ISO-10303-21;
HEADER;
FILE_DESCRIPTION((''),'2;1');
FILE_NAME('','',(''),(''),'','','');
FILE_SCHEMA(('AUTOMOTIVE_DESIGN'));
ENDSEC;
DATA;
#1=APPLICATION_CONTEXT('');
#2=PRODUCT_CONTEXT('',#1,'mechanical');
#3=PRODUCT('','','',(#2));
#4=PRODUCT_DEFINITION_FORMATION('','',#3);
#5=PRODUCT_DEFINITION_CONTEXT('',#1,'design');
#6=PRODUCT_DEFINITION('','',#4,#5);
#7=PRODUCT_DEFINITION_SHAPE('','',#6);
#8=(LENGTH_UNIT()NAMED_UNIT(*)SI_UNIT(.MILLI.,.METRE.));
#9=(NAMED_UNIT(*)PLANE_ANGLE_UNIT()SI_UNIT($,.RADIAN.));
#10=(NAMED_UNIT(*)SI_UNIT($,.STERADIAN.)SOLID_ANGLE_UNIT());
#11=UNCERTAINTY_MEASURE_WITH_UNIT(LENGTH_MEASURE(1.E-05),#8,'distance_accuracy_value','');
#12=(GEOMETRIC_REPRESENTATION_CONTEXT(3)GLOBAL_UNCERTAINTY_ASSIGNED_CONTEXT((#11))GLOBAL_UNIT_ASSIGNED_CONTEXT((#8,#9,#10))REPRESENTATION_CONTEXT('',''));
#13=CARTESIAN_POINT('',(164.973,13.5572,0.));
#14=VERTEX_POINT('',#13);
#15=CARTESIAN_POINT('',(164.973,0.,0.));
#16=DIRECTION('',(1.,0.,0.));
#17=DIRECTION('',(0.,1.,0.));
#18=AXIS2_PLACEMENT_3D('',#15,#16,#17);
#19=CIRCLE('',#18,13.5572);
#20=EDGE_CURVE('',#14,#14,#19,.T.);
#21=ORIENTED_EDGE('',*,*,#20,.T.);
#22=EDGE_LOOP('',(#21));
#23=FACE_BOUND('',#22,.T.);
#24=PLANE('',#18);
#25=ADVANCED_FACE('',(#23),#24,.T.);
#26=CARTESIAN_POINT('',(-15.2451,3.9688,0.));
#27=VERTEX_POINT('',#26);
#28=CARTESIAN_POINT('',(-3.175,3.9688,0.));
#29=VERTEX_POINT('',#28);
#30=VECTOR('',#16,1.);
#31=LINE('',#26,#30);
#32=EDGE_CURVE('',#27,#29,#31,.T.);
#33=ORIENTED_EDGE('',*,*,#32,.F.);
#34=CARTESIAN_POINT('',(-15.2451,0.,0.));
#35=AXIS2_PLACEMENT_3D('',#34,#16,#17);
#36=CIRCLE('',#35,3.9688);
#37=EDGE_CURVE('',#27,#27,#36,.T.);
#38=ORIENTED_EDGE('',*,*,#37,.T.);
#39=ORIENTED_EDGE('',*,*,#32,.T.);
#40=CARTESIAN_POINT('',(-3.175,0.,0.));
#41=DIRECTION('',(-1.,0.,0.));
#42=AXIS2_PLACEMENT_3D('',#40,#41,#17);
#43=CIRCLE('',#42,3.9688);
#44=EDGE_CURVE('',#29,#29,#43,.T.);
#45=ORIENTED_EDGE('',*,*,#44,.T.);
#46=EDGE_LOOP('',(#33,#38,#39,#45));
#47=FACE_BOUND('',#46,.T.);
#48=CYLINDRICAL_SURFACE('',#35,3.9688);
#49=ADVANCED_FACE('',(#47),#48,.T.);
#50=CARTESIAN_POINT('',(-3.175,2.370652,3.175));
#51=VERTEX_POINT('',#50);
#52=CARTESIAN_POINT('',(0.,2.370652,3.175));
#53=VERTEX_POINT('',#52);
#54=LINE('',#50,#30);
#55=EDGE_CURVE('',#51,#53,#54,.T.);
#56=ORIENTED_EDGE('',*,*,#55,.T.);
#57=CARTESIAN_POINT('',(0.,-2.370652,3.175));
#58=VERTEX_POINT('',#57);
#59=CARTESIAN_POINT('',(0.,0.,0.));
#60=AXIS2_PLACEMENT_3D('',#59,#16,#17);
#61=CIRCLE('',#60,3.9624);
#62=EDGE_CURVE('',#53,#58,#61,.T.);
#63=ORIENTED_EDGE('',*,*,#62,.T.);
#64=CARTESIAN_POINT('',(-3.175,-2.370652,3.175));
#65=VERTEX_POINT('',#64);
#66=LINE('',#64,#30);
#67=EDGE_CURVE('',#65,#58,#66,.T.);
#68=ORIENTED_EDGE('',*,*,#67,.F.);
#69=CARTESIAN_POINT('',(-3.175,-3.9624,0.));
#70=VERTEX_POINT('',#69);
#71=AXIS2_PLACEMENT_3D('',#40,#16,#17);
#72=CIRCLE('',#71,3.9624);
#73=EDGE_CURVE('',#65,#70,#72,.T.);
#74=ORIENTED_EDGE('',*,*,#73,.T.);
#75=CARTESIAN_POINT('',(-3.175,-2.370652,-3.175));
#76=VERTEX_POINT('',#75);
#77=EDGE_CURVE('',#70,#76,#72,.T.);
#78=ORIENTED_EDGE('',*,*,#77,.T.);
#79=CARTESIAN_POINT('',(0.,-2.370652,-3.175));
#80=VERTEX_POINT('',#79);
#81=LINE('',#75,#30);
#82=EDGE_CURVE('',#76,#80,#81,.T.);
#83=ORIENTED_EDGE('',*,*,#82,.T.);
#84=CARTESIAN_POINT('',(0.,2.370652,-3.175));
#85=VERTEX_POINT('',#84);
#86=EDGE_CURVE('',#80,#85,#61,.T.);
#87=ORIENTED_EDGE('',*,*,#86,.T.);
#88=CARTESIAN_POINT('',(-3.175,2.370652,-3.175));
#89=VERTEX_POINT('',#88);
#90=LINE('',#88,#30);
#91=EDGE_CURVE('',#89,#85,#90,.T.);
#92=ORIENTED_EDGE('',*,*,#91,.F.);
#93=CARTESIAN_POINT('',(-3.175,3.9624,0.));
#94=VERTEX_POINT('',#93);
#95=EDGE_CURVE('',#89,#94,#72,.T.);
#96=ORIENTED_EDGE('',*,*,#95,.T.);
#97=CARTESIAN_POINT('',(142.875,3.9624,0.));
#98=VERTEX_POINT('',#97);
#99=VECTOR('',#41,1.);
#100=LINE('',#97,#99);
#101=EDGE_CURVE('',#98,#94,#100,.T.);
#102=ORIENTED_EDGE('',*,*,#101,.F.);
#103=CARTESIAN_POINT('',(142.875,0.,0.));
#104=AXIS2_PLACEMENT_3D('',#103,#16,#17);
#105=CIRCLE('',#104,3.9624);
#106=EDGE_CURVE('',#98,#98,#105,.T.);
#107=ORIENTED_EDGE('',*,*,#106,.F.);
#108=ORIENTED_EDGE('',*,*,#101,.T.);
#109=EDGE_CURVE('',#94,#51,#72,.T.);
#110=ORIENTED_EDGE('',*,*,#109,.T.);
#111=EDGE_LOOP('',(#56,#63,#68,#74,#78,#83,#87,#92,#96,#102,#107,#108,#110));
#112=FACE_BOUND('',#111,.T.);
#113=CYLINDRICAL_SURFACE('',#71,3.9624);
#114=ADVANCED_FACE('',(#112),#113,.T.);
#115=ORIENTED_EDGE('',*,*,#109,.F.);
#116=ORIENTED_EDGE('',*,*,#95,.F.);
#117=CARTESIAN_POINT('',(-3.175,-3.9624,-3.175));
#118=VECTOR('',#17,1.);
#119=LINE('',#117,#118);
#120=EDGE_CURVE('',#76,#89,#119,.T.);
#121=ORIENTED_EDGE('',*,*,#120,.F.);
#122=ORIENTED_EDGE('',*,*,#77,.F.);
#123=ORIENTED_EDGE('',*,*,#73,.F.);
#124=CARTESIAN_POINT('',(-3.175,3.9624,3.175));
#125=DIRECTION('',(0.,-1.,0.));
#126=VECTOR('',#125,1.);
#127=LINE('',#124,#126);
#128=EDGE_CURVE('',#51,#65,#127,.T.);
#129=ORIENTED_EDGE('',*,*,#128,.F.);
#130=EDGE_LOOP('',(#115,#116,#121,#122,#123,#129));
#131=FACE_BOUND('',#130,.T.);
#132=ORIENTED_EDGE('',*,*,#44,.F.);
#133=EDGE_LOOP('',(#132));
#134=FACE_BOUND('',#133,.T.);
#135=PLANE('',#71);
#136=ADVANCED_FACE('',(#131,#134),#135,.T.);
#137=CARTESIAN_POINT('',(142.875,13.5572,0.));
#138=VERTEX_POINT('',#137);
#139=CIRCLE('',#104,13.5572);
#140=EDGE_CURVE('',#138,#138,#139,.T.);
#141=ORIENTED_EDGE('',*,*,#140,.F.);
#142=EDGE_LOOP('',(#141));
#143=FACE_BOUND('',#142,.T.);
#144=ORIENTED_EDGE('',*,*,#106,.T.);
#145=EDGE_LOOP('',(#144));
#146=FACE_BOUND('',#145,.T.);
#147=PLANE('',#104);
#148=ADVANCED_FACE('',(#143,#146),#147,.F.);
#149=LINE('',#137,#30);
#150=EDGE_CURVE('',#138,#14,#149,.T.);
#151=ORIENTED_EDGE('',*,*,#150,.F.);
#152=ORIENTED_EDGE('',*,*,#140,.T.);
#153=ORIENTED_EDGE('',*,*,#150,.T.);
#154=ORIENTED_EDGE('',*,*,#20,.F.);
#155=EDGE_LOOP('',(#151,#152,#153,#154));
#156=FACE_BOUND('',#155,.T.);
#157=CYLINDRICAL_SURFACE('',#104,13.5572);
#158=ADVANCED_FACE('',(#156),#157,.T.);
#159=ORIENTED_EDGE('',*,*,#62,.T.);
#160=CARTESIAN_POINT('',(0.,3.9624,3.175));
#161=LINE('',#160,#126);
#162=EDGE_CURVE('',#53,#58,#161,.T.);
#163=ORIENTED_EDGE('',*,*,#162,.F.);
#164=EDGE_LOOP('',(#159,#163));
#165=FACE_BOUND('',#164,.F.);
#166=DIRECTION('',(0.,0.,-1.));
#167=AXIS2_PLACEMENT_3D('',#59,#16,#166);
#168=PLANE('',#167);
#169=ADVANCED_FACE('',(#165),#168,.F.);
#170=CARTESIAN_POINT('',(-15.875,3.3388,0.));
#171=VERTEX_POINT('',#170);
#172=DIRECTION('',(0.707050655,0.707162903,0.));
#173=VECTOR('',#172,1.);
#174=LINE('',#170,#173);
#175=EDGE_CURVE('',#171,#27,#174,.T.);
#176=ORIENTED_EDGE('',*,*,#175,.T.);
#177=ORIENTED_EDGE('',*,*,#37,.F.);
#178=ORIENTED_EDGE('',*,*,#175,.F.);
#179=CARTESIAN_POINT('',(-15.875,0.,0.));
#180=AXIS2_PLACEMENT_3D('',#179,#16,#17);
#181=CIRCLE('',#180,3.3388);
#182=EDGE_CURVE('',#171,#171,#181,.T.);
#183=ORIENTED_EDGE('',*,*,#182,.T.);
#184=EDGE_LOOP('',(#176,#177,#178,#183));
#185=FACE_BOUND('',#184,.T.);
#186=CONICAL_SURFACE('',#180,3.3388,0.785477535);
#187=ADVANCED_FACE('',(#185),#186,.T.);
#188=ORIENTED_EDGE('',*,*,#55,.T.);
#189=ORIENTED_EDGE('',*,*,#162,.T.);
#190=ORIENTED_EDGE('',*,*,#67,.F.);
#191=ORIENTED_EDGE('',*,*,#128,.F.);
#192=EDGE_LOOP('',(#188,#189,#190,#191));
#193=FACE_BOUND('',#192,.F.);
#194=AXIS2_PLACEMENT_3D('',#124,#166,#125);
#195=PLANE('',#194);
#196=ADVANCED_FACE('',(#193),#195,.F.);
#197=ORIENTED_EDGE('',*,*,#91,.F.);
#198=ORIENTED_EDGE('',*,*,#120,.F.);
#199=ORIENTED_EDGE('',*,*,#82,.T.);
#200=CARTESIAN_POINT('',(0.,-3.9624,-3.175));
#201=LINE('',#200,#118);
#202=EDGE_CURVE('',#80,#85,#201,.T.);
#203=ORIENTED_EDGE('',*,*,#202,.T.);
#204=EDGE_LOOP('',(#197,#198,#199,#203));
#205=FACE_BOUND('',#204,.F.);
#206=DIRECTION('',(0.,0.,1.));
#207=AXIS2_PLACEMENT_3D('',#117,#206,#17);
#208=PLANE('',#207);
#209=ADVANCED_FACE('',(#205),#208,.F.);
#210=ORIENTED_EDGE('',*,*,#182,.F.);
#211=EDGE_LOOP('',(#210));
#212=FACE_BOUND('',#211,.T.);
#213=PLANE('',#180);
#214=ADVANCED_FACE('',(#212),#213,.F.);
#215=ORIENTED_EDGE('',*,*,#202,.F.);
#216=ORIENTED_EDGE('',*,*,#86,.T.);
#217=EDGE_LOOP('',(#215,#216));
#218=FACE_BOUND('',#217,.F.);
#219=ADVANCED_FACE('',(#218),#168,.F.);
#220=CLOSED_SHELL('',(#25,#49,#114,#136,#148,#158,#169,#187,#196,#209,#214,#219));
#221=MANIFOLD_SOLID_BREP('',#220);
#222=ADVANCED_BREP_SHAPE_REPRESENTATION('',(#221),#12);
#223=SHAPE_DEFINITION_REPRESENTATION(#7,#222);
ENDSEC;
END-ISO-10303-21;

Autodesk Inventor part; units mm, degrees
sketch "Sketch_1" plane through (0, 0, 0) normal (0, 0, 1) x (1, 0, 0)
  line L0 (164.973, 0) -> (-3.175, 0)
  line L1 (-3.175, 0) -> (-3.175, 3.9624)
  line L2 (-3.175, 3.9624) -> (142.875, 3.9624)
  line L3 (142.875, 3.9624) -> (142.875, 13.5572)
  line L4 (142.875, 13.5572) -> (164.973, 13.5572)
  line L5 (164.973, 13.5572) -> (164.973, 0)
  line L6 (164.973, 0) -> (-3.175, 0)
revolve "Revolution1" add sketch "Sketch_1" angle 360 about axis through (164.973, 0, 0) along (1, 0, 0)
sketch "Sketch_3" plane through (0, 0, 0) normal (0, 0, 1) x (1, 0, 0)
  line L0 (-3.175, 0) -> (-15.875, 0)
  line L1 (-15.875, 0) -> (-15.875, 3.3388)
  line L2 (-15.875, 3.3388) -> (-15.2451, 3.9688)
  line L3 (-15.2451, 3.9688) -> (-3.175, 3.9688)
  line L4 (-3.175, 3.9688) -> (-3.175, 0)
  line L5 (-3.175, 0) -> (-15.875, 0)
revolve "Revolution2" add sketch "Sketch_3" angle 360 about axis through (-3.175, 0, 0) along (1, 0, 0)
thread "Thread1" size "5/16-24 UNF" class "2A" standard "ANSI Unified Screw Threads" full length
sketch "Sketch_10" plane through (-3.175, 0, 0) normal (1, 0, 0) x (0, 0, -1)
  line L0 (-7.9248, -7.9248) -> (7.9248, -7.9248)
  line L1 (7.9248, -7.9248) -> (7.9248, 7.9248)
  line L2 (7.9248, 7.9248) -> (-7.9248, 7.9248)
  line L3 (-7.9248, 7.9248) -> (-7.9248, -7.9248)
  line L4 (-3.175, -3.9624) -> (3.175, -3.9624)
  line L5 (3.175, -3.9624) -> (3.175, 3.9624)
  line L6 (3.175, 3.9624) -> (-3.175, 3.9624)
  line L7 (-3.175, 3.9624) -> (-3.175, -3.9624)
extrude "Extrusion1" cut sketch "Sketch_10" along normal blind 3.175
ref_plane "dia1_XY" through (-3.175, 3.9624, 0) normal (1, 0, 0) x (0, 0, -1)
ref_plane "dia1_YZ" through (-3.175, 3.9624, 0) normal (0, 0, -1) x (0, 1, 0)
ref_plane "dia1_ZX" through (-3.175, 3.9624, 0) normal (0, 1, 0) x (1, 0, 0)
ref_plane "dia12_XY" through (0, 0, 14.1351) normal (1, 0, 0) x (0, 0, -1)
ref_plane "dia12_YZ" through (0, 0, 14.1351) normal (0, 0, -1) x (0, 1, 0)
ref_plane "dia12_ZX" through (0, 0, 14.1351) normal (0, 1, 0) x (1, 0, 0)
ref_plane "dia2_XY" through (-3.175, -3.9624, 0) normal (1, 0, 0) x (0, 0, -1)
ref_plane "dia2_YZ" through (-3.175, -3.9624, 0) normal (0, 0, -1) x (0, 1, 0)
ref_plane "dia2_ZX" through (-3.175, -3.9624, 0) normal (0, 1, 0) x (1, 0, 0)
ref_plane "dia22_XY" through (0, 0, -14.1351) normal (1, 0, 0) x (0, 0, -1)
ref_plane "dia22_YZ" through (0, 0, -14.1351) normal (0, 0, -1) x (0, 1, 0)
ref_plane "dia22_ZX" through (0, 0, -14.1351) normal (0, 1, 0) x (1, 0, 0)
ref_plane "rl1_XY" through (-15.875, 0, 0) normal (1, 0, 0) x (0, 0, -1)
ref_plane "rl1_YZ" through (-15.875, 0, 0) normal (0, 0, -1) x (0, 1, 0)
ref_plane "rl1_ZX" through (-15.875, 0, 0) normal (0, 1, 0) x (1, 0, 0)
ref_plane "rl2_XY" through (-3.175, 0, 0) normal (1, 0, 0) x (0, 0, -1)
ref_plane "rl2_YZ" through (-3.175, 0, 0) normal (0, 0, -1) x (0, 1, 0)
ref_plane "rl2_ZX" through (-3.175, 0, 0) normal (0, 1, 0) x (1, 0, 0)
ref_plane "rod_cp_XY" through (0, 0, 0) normal (1, 0, 0) x (0, 0, -1)
ref_plane "rod_cp_YZ" through (0, 0, 0) normal (0, 0, -1) x (0, 1, 0)
ref_plane "rod_cp_ZX" through (0, 0, 0) normal (0, 1, 0) x (1, 0, 0)
ref_plane "thd1_XY" through (-15.875, 3.9688, 0) normal (1, 0, 0) x (0, 0, -1)
ref_plane "thd1_YZ" through (-15.875, 3.9688, 0) normal (0, 0, -1) x (0, 1, 0)
ref_plane "thd1_ZX" through (-15.875, 3.9688, 0) normal (0, 1, 0) x (1, 0, 0)
ref_plane "thd2_XY" through (-15.875, -3.9688, 0) normal (1, 0, 0) x (0, 0, -1)
ref_plane "thd2_YZ" through (-15.875, -3.9688, 0) normal (0, 0, -1) x (0, 1, 0)
ref_plane "thd2_ZX" through (-15.875, -3.9688, 0) normal (0, 1, 0) x (1, 0, 0)
ref_plane "to_rod_clevis_XY" through (-20.701, 0, 0) normal (1, 0, 0) x (0, 0, -1)
ref_plane "to_rod_clevis_YZ" through (-20.701, 0, 0) normal (0, 0, -1) x (0, 1, 0)
ref_plane "to_rod_clevis_ZX" through (-20.701, 0, 0) normal (0, 1, 0) x (1, 0, 0)
ref_plane "wf1_XY" through (-3.175, 0, 0) normal (1, 0, 0) x (0, 0, -1)
ref_plane "wf1_YZ" through (-3.175, 0, 0) normal (0, 0, -1) x (0, 1, 0)
ref_plane "wf1_ZX" through (-3.175, 0, 0) normal (0, 1, 0) x (1, 0, 0)
ref_plane "wf2_XY" through (0, 0, 0) normal (1, 0, 0) x (0, 0, -1)
ref_plane "wf2_YZ" through (0, 0, 0) normal (0, 0, -1) x (0, 1, 0)
ref_plane "wf2_ZX" through (0, 0, 0) normal (0, 1, 0) x (1, 0, 0)
ref_plane "wfw1_XY" through (-3.175, 0, -3.175) normal (0, 1, 0) x (1, 0, 0)
ref_plane "wfw1_YZ" through (-3.175, 0, -3.175) normal (1, 0, 0) x (0, 0, -1)
ref_plane "wfw1_ZX" through (-3.175, 0, -3.175) normal (0, 0, -1) x (0, 1, 0)
ref_plane "wfw2_XY" through (-3.175, 0, 3.175) normal (0, 1, 0) x (1, 0, 0)
ref_plane "wfw2_YZ" through (-3.175, 0, 3.175) normal (1, 0, 0) x (0, 0, -1)
ref_plane "wfw2_ZX" through (-3.175, 0, 3.175) normal (0, 0, -1) x (0, 1, 0)
properties part number "SR-094-D0_rod"
